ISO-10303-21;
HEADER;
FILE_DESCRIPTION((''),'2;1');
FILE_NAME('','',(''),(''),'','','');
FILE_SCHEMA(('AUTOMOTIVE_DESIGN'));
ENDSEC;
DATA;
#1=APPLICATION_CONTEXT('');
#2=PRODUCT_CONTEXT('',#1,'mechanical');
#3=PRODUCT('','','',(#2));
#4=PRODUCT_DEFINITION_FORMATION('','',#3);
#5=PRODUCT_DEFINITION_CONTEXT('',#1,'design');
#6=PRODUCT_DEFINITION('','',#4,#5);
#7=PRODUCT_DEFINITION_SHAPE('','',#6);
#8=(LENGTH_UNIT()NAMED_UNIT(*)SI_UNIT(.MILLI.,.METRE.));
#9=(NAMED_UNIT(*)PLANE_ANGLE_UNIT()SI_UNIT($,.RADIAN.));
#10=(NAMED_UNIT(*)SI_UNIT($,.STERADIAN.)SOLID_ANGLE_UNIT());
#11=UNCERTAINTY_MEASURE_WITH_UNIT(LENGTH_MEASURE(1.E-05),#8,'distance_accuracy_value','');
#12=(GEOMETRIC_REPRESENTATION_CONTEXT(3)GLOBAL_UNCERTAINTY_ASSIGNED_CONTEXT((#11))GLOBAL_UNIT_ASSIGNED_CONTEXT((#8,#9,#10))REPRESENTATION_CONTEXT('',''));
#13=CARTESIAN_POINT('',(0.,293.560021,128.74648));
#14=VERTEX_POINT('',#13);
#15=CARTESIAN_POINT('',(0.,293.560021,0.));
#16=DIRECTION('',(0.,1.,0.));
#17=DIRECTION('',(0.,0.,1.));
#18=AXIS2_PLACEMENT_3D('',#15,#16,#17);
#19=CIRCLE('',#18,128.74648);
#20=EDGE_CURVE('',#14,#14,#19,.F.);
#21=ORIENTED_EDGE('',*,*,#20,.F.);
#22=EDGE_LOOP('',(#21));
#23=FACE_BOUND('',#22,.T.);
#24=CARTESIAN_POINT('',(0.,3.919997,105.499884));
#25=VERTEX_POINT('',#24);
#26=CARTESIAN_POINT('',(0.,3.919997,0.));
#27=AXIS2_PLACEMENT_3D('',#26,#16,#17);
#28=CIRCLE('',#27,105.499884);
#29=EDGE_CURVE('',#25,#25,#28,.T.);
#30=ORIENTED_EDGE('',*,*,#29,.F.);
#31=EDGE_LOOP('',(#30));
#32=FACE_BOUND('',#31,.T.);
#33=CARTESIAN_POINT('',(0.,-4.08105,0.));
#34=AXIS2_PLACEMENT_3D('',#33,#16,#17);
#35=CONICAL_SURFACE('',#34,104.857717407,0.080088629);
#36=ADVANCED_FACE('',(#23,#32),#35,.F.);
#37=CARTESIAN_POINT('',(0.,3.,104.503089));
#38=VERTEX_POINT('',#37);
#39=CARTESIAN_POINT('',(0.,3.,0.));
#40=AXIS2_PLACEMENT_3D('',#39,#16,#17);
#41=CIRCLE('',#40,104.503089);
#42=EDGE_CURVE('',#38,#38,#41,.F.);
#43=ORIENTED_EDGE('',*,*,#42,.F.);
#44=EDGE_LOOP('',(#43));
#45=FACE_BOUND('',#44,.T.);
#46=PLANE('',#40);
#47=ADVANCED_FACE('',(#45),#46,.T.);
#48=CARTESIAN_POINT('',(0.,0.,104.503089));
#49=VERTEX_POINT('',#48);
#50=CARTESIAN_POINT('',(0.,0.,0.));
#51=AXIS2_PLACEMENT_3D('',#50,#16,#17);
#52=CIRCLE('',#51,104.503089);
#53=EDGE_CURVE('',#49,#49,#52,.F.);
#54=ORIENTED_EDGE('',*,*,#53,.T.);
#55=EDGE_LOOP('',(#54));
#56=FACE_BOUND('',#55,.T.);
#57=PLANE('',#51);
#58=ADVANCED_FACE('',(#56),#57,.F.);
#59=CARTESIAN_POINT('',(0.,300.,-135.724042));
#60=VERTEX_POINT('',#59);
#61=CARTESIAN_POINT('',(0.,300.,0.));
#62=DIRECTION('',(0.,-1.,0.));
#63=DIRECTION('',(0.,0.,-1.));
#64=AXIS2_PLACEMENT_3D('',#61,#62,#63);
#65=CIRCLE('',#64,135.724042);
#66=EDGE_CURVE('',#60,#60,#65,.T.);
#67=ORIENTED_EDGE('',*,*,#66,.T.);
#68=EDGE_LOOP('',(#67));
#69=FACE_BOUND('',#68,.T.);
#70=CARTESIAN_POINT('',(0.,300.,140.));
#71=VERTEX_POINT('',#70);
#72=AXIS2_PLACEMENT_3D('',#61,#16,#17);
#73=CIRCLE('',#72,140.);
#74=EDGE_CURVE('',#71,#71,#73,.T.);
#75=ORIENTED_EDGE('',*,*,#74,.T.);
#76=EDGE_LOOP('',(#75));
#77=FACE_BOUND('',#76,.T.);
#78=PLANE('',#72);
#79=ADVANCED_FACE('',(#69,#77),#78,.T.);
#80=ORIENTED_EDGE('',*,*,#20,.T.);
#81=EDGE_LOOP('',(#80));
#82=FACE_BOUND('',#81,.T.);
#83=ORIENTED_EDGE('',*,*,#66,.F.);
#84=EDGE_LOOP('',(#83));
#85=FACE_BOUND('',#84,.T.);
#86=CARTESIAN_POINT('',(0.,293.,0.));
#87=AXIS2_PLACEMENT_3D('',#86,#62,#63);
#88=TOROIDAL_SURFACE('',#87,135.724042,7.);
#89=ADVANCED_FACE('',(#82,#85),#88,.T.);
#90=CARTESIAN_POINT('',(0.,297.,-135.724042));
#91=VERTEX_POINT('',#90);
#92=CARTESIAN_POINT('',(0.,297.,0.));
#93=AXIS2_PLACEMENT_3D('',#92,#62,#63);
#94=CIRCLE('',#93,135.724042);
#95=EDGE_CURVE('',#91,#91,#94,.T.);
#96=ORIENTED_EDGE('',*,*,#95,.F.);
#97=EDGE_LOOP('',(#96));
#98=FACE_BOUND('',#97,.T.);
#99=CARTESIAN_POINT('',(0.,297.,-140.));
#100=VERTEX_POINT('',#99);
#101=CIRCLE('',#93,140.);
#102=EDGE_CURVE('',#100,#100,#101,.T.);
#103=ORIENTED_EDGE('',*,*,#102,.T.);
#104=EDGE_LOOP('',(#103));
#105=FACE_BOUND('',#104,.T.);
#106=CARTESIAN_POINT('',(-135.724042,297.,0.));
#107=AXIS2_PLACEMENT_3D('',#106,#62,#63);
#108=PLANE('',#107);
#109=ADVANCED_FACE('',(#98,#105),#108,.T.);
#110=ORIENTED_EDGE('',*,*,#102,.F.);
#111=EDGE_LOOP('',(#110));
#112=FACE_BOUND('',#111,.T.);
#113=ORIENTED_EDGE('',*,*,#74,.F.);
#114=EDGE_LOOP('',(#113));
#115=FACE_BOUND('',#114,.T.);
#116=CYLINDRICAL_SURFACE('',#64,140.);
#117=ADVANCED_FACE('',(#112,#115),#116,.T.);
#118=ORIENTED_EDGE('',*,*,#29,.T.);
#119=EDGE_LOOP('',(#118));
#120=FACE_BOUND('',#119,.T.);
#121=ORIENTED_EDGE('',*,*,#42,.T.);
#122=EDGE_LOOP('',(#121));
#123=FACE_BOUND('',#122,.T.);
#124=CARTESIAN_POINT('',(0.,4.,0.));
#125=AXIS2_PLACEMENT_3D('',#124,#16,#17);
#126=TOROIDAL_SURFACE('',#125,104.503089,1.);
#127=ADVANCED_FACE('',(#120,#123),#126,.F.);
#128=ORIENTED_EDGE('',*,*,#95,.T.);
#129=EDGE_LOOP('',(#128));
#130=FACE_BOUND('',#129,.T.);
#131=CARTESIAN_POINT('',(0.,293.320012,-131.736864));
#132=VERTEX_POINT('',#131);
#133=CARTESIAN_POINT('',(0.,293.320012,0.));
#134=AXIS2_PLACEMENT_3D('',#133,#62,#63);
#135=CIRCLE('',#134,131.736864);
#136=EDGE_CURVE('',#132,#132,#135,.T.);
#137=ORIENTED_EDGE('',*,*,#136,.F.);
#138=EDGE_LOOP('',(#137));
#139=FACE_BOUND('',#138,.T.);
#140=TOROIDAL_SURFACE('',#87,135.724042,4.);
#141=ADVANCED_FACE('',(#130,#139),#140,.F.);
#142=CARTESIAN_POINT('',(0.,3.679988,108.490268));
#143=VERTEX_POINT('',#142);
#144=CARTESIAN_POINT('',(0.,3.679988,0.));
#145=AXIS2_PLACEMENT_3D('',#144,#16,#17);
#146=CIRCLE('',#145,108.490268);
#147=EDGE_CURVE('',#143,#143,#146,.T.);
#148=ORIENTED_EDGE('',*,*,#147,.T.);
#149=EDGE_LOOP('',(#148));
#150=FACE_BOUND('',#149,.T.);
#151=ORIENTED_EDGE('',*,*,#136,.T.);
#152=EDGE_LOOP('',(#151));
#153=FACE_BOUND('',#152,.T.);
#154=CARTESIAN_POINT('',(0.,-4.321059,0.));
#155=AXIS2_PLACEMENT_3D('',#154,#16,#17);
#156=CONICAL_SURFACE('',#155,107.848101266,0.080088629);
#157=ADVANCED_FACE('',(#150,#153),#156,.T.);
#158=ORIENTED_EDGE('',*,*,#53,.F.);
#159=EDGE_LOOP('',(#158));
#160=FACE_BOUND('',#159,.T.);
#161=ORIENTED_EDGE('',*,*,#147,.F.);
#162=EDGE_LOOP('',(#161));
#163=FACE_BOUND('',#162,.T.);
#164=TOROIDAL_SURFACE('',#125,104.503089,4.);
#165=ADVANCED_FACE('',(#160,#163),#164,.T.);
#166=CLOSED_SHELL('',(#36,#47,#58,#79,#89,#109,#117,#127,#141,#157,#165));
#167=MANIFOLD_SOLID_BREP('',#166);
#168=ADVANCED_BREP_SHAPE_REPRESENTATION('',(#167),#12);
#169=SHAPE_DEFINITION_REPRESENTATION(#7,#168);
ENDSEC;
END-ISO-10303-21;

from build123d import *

# Parameters (mm, degrees)
SKETCH1_R           = 140
BOSS_EXTRUDE1_DEPTH = 300
FILLET1_R           = 4


# Read off the part's stored shape, not the designer's step: Shell1
with BuildPart() as part:
    # Sketch1 → Boss-Extrude1 (new body)
    with BuildSketch(Plane(origin=(0, 0, 0), x_dir=(1, 0, 0), z_dir=(0, 1, 0))):
        with Locations(Location((0, 0, 0), (0, 0, 270))):
            Circle(SKETCH1_R)
    extrude(amount=BOSS_EXTRUDE1_DEPTH)

    # Sketch3 → Cut-Revolve1 (revolve, cut)
    with BuildSketch(Plane.XY, mode=Mode.PRIVATE) as cut_revolve1_sk:
        with BuildLine():
            Line((-107.848101266, -4.321058688), (-131.736864002, 293.320012156))
            ThreePointArc((-131.736864002, 293.320012156), (-133.011114968, 295.939391827), (-135.72404248, 297))
            Line((-135.72404248, 297), (-179.746835443, 297))
            Line((-179.746835443, 297), (-193.472957422, -4.321058688))
            Line((-193.472957422, -4.321058688), (-107.848101266, -4.321058688))
        make_face()
    revolve(cut_revolve1_sk.sketch.rotate(Axis((0, -4.321058688, 0), (0, 1, 0)), 270), axis=Axis((0, -4.321058688, 0), (0, 1, 0)), mode=Mode.SUBTRACT)

    # Fillet1
    fillet1_edges = [part.edges().sort_by_distance(p)[0] for p in [
        (0, 0, 108.194910748),
    ]]
    fillet(fillet1_edges, radius=FILLET1_R)

    # Shell1 outline → Shell1 (revolve, cut)
    with BuildSketch(Plane.XY):
        with BuildLine():
            ThreePointArc((104.503089212, 3), (105.18132109, 3.265152043), (105.499883831, 3.919996961))
            Line((105.499883831, 3.919996961), (128.746480143, 293.560021272))
            ThreePointArc((128.746480143, 293.560021272), (130.976419333, 298.143935697), (135.72404248, 300))
            Line((135.72404248, 300), (0, 300))
            Line((0, 300), (0, 3))
            Line((0, 3), (104.503089212, 3))
        make_face()
    revolve(axis=Axis((0, 0, 0), (0, 1, 0)), mode=Mode.SUBTRACT)


solid = part.part
